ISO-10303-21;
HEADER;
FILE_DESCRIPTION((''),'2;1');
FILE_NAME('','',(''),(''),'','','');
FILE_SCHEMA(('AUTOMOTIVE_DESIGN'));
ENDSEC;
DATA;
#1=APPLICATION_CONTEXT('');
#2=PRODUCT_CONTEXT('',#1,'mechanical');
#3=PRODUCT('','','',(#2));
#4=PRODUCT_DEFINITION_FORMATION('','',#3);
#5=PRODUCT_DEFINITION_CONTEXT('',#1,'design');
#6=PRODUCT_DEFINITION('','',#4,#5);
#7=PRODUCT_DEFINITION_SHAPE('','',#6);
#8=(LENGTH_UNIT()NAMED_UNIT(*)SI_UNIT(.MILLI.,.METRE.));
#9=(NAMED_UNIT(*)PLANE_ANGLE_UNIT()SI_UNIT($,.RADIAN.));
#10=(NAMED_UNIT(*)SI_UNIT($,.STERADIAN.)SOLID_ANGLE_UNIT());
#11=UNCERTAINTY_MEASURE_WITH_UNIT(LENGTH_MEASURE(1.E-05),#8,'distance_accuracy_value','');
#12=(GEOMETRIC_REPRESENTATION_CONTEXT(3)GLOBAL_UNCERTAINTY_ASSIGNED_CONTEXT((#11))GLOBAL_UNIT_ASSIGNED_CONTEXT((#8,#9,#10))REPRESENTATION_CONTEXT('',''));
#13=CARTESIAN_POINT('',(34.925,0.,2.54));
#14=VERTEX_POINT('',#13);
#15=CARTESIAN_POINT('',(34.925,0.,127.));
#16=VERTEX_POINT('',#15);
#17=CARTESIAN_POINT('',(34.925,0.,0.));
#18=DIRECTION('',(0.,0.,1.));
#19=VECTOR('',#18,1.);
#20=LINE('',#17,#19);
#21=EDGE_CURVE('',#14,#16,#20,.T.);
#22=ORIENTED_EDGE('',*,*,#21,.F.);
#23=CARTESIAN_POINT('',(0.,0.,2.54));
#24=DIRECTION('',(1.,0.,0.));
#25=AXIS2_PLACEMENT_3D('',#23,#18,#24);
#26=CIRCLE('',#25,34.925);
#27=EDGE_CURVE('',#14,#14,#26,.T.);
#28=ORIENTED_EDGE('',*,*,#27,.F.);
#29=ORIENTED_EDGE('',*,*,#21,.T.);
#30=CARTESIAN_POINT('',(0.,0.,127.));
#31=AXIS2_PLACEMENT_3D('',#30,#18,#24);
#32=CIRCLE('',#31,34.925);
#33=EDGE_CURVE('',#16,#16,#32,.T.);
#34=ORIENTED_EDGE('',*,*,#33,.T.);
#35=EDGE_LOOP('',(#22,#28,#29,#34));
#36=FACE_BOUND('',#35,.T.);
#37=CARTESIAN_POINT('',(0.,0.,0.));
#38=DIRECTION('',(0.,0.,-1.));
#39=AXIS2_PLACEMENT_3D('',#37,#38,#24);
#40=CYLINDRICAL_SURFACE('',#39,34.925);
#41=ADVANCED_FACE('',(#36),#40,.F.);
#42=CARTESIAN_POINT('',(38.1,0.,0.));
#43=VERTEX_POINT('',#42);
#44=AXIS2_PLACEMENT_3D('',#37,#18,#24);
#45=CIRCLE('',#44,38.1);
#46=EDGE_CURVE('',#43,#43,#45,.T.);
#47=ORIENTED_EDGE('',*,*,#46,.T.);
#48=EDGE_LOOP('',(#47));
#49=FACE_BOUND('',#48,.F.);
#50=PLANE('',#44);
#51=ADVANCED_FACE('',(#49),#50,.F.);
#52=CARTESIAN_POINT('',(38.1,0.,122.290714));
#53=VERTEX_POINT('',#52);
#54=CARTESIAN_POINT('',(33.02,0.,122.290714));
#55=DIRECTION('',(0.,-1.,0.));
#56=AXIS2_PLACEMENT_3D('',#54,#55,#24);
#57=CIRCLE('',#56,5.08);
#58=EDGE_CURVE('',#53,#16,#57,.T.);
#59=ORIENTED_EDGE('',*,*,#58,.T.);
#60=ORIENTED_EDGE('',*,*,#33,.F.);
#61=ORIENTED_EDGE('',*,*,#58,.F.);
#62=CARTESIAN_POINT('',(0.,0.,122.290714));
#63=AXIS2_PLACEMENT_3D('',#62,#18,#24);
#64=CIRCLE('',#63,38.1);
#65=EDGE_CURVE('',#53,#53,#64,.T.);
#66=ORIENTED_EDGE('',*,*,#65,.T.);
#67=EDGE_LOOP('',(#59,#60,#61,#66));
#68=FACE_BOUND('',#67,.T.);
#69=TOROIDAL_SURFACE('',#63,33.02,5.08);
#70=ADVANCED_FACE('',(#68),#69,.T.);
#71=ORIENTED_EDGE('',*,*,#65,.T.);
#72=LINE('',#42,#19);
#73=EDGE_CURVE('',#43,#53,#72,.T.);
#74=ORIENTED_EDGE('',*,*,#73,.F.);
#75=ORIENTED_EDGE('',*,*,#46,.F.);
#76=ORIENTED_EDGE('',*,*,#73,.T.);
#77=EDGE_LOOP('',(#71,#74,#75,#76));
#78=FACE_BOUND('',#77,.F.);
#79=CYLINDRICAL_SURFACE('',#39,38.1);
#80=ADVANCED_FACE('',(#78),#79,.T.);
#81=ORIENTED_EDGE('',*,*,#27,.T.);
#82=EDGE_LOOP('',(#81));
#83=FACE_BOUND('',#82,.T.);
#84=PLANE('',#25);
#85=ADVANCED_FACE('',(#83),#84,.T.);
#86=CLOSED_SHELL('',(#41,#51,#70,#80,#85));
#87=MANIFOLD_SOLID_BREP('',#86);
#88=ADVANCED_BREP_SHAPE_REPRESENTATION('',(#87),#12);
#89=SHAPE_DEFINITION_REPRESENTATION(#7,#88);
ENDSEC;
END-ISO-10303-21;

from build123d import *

# Parameters (mm, degrees)
F0_R     = 38.1
F0_R_2   = 34.925
F1_DEPTH = 127
F2_R     = 34.925
F3_DEPTH = 2.54


# Not quite as in the source:
# - a fillet or chamfer that OpenCascade refuses, or shapes differently, is made with other operations: its cross-section is extruded or revolved along the edge and cut away or added


with BuildPart() as f1:
    # F0 (on Top) → F1 (new body)
    with BuildSketch(Plane.XY):
        Circle(F0_R)
        Circle(F0_R_2, mode=Mode.SUBTRACT)
    extrude(amount=F1_DEPTH)

    # F2 (on Top) → F3 (join)
    with BuildSketch(Plane.XY):
        Circle(F2_R)
    extrude(amount=F3_DEPTH)

    # F4: fillet of radius 5.08 on 1 edges, made by hand

    # F4_s1 → F4_t2 (revolve, cut)
    with BuildSketch(Plane.XZ):
        with BuildLine():
            ThreePointArc((38.1, 122.2907139607), (37.2321134838, 125.1305202921), (34.925, 127))
            Line((34.925, 127), (38.1, 127))
            Line((38.1, 127), (38.1, 122.2907139607))
        make_face()
    revolve(axis=Axis((0, 0, 127), (0, 0, 1)), mode=Mode.SUBTRACT)


solid = f1.part
